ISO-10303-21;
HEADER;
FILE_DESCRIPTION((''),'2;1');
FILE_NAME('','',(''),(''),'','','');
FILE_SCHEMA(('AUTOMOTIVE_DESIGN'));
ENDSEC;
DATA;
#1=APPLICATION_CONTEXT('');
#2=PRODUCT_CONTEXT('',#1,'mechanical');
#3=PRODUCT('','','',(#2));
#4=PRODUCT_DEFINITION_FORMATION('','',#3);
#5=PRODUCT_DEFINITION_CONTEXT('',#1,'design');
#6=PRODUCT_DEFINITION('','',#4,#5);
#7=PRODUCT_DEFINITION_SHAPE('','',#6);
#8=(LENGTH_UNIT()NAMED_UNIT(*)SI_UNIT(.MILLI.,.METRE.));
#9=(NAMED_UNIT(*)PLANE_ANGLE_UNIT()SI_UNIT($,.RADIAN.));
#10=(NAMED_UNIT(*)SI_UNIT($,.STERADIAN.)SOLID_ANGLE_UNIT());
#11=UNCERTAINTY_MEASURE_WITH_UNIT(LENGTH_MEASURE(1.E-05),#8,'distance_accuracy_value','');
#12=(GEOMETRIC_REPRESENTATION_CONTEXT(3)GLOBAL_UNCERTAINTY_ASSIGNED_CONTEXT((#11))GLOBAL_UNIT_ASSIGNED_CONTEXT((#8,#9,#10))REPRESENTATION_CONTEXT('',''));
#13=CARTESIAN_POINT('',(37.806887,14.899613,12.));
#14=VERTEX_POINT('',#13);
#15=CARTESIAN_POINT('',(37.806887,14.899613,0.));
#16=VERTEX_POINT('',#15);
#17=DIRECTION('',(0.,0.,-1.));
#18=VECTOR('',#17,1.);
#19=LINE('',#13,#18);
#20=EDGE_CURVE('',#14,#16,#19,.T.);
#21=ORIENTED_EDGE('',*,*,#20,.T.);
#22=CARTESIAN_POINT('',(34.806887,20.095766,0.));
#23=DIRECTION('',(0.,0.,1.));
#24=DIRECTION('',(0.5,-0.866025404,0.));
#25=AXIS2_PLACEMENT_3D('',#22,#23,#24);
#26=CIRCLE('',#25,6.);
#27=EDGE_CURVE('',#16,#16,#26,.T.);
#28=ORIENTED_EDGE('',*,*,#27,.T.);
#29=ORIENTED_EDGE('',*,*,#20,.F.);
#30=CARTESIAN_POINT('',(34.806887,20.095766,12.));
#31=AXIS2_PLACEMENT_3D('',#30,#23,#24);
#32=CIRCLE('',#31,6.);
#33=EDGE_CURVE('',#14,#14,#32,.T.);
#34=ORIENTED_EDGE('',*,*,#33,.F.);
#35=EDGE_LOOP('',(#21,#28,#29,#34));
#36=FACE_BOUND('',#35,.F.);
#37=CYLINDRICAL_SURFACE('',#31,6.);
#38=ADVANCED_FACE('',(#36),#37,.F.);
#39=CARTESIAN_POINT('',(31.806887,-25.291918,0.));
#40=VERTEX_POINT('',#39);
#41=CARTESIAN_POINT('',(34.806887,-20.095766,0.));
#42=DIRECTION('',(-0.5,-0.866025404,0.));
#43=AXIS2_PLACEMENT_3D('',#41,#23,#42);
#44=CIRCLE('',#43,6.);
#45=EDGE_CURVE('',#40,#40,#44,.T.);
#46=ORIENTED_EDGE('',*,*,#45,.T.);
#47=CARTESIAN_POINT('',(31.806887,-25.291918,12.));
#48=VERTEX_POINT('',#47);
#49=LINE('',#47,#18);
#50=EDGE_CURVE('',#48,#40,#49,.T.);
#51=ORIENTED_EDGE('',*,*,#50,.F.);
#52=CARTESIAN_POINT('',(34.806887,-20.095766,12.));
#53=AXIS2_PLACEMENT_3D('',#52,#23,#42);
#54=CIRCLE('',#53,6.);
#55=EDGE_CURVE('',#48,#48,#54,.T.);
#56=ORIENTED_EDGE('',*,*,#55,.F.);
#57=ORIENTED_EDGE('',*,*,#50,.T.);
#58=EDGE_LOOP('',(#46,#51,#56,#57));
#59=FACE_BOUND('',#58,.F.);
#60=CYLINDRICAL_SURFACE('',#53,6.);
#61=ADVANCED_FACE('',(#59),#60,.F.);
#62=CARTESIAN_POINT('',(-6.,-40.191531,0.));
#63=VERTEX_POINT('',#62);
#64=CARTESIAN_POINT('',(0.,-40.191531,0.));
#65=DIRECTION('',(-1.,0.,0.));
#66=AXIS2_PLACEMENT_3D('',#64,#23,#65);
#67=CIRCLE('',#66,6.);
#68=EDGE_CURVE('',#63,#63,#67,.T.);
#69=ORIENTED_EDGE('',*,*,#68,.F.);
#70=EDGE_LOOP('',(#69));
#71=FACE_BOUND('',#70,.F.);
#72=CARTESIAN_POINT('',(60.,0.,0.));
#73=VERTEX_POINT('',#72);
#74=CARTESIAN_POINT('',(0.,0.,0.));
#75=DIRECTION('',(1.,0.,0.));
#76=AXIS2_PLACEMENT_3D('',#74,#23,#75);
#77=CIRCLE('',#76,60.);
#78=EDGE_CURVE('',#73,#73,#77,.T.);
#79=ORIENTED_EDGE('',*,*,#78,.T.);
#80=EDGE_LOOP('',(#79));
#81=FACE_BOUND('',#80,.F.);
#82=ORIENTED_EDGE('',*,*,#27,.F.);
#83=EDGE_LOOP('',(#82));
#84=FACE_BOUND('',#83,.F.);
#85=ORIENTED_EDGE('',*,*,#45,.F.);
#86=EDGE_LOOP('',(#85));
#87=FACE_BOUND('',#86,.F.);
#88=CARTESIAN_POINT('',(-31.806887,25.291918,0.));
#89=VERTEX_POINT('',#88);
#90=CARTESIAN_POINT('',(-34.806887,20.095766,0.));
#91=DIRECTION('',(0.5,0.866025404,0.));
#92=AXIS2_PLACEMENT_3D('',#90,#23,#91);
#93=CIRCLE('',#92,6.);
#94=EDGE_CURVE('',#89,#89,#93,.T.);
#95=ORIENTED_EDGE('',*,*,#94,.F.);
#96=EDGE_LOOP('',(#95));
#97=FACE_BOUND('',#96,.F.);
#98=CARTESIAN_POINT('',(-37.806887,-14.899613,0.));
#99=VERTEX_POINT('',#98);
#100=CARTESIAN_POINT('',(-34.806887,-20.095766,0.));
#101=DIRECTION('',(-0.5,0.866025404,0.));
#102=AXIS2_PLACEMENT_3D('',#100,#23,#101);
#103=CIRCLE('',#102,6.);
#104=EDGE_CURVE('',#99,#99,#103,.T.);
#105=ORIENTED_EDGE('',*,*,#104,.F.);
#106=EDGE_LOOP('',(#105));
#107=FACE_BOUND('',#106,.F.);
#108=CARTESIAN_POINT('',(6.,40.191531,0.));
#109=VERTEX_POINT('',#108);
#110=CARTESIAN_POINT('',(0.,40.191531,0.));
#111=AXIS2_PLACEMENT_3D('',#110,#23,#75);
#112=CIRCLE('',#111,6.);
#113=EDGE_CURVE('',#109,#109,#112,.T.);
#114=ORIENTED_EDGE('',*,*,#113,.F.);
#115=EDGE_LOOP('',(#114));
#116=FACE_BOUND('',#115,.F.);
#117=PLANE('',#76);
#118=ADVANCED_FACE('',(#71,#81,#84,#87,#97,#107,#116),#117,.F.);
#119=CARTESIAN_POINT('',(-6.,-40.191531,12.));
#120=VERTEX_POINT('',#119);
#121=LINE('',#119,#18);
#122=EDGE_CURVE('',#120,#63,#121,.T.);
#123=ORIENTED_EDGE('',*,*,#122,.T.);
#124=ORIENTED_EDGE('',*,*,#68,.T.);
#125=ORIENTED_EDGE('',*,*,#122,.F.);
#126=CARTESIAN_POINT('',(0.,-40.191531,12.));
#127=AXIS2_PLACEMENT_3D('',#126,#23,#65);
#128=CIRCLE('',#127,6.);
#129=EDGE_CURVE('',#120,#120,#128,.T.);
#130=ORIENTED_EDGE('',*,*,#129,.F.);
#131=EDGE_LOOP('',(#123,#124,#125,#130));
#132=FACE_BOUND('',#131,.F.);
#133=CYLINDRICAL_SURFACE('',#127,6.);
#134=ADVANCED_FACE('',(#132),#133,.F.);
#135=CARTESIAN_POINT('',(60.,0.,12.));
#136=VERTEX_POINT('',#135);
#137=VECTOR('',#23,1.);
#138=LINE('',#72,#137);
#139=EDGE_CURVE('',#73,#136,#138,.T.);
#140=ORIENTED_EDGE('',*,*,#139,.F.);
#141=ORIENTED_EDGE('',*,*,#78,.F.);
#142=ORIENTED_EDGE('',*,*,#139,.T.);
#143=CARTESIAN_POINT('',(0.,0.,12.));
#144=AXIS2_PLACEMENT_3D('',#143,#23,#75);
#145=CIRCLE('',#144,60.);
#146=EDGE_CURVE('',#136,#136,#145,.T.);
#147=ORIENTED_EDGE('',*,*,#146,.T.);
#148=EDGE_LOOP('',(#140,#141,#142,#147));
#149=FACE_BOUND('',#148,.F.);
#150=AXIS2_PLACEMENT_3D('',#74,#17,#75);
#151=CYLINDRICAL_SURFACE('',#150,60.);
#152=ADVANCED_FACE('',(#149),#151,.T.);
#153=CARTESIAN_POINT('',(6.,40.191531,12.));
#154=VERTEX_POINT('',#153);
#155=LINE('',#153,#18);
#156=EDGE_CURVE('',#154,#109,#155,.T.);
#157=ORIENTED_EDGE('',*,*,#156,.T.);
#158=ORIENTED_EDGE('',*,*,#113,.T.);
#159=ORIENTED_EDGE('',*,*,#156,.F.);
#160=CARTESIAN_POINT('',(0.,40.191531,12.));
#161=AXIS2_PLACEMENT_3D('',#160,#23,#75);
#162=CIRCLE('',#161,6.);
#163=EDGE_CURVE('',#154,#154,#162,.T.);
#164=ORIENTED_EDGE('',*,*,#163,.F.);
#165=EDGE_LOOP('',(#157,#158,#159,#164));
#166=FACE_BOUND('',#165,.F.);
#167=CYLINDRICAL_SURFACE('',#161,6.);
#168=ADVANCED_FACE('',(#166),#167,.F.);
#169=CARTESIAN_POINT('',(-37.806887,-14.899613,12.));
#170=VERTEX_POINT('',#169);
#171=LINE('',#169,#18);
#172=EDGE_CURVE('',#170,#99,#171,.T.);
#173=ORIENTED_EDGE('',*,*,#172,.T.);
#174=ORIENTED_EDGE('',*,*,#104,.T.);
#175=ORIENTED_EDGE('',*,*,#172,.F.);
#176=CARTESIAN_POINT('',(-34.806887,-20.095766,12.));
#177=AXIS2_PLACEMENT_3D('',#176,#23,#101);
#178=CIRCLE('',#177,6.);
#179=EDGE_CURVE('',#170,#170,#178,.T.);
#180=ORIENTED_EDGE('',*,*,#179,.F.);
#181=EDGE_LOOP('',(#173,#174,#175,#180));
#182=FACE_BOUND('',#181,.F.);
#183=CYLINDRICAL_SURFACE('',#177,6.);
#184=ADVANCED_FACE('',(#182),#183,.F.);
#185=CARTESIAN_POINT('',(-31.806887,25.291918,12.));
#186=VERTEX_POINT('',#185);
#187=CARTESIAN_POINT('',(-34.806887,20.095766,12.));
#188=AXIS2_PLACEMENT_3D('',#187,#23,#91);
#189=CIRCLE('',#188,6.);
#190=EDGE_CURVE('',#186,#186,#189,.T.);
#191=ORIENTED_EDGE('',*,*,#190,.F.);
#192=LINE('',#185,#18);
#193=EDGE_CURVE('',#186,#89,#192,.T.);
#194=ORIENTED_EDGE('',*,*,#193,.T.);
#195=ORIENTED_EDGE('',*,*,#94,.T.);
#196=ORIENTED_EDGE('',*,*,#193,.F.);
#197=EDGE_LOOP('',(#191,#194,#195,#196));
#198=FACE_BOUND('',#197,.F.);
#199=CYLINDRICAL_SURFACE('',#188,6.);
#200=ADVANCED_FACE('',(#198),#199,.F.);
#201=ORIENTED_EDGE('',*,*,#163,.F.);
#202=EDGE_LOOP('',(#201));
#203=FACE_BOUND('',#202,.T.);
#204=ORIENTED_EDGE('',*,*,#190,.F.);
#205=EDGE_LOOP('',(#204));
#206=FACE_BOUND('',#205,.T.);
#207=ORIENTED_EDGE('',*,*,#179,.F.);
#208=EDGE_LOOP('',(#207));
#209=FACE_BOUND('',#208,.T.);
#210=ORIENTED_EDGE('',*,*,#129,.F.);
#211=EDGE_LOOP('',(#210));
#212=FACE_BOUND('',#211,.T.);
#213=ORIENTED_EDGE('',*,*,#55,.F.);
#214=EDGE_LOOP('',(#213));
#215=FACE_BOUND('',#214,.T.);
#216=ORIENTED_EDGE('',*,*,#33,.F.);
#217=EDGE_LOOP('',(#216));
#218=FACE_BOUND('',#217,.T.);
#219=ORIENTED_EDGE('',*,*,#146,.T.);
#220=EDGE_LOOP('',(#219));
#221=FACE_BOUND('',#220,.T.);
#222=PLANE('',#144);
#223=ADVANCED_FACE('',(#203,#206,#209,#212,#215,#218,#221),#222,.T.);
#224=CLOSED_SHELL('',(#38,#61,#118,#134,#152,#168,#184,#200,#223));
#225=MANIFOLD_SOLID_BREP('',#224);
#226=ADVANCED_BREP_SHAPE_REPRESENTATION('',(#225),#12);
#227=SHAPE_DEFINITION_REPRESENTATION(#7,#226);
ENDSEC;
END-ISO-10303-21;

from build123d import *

# Parameters (mm, degrees)
F2_R            = 60
F3_DEPTH        = 12
F5_R            = 6
F6_DEPTH        = 12.001
F6_COPIES_COUNT = 6


# Not quite as in the source:
# - a pattern or mirror of a feature is missing from the dataset's text; its kind, count and spacing are read off the source's solid


with BuildPart() as f3:
    # F2 (on Top) → F3 (new body)
    with BuildSketch(Plane.XY):
        Circle(F2_R)
    extrude(amount=F3_DEPTH)

    # F5 (on face) → F6 (cut, through all)
    with BuildSketch(Plane.XY.offset(12)):
        with Locations((0, 40.1915311813)):
            Circle(F5_R)
    f6 = extrude(amount=-F6_DEPTH, mode=Mode.SUBTRACT)

    # F6_copies: F6 ×6 about axis
    f6_copies_axis = Axis((0, 0, 0), (0, 0, 1))
    for i in range(1, F6_COPIES_COUNT):
        add(f6.rotate(f6_copies_axis, i * 360 / F6_COPIES_COUNT), mode=Mode.SUBTRACT)


solid = f3.part
